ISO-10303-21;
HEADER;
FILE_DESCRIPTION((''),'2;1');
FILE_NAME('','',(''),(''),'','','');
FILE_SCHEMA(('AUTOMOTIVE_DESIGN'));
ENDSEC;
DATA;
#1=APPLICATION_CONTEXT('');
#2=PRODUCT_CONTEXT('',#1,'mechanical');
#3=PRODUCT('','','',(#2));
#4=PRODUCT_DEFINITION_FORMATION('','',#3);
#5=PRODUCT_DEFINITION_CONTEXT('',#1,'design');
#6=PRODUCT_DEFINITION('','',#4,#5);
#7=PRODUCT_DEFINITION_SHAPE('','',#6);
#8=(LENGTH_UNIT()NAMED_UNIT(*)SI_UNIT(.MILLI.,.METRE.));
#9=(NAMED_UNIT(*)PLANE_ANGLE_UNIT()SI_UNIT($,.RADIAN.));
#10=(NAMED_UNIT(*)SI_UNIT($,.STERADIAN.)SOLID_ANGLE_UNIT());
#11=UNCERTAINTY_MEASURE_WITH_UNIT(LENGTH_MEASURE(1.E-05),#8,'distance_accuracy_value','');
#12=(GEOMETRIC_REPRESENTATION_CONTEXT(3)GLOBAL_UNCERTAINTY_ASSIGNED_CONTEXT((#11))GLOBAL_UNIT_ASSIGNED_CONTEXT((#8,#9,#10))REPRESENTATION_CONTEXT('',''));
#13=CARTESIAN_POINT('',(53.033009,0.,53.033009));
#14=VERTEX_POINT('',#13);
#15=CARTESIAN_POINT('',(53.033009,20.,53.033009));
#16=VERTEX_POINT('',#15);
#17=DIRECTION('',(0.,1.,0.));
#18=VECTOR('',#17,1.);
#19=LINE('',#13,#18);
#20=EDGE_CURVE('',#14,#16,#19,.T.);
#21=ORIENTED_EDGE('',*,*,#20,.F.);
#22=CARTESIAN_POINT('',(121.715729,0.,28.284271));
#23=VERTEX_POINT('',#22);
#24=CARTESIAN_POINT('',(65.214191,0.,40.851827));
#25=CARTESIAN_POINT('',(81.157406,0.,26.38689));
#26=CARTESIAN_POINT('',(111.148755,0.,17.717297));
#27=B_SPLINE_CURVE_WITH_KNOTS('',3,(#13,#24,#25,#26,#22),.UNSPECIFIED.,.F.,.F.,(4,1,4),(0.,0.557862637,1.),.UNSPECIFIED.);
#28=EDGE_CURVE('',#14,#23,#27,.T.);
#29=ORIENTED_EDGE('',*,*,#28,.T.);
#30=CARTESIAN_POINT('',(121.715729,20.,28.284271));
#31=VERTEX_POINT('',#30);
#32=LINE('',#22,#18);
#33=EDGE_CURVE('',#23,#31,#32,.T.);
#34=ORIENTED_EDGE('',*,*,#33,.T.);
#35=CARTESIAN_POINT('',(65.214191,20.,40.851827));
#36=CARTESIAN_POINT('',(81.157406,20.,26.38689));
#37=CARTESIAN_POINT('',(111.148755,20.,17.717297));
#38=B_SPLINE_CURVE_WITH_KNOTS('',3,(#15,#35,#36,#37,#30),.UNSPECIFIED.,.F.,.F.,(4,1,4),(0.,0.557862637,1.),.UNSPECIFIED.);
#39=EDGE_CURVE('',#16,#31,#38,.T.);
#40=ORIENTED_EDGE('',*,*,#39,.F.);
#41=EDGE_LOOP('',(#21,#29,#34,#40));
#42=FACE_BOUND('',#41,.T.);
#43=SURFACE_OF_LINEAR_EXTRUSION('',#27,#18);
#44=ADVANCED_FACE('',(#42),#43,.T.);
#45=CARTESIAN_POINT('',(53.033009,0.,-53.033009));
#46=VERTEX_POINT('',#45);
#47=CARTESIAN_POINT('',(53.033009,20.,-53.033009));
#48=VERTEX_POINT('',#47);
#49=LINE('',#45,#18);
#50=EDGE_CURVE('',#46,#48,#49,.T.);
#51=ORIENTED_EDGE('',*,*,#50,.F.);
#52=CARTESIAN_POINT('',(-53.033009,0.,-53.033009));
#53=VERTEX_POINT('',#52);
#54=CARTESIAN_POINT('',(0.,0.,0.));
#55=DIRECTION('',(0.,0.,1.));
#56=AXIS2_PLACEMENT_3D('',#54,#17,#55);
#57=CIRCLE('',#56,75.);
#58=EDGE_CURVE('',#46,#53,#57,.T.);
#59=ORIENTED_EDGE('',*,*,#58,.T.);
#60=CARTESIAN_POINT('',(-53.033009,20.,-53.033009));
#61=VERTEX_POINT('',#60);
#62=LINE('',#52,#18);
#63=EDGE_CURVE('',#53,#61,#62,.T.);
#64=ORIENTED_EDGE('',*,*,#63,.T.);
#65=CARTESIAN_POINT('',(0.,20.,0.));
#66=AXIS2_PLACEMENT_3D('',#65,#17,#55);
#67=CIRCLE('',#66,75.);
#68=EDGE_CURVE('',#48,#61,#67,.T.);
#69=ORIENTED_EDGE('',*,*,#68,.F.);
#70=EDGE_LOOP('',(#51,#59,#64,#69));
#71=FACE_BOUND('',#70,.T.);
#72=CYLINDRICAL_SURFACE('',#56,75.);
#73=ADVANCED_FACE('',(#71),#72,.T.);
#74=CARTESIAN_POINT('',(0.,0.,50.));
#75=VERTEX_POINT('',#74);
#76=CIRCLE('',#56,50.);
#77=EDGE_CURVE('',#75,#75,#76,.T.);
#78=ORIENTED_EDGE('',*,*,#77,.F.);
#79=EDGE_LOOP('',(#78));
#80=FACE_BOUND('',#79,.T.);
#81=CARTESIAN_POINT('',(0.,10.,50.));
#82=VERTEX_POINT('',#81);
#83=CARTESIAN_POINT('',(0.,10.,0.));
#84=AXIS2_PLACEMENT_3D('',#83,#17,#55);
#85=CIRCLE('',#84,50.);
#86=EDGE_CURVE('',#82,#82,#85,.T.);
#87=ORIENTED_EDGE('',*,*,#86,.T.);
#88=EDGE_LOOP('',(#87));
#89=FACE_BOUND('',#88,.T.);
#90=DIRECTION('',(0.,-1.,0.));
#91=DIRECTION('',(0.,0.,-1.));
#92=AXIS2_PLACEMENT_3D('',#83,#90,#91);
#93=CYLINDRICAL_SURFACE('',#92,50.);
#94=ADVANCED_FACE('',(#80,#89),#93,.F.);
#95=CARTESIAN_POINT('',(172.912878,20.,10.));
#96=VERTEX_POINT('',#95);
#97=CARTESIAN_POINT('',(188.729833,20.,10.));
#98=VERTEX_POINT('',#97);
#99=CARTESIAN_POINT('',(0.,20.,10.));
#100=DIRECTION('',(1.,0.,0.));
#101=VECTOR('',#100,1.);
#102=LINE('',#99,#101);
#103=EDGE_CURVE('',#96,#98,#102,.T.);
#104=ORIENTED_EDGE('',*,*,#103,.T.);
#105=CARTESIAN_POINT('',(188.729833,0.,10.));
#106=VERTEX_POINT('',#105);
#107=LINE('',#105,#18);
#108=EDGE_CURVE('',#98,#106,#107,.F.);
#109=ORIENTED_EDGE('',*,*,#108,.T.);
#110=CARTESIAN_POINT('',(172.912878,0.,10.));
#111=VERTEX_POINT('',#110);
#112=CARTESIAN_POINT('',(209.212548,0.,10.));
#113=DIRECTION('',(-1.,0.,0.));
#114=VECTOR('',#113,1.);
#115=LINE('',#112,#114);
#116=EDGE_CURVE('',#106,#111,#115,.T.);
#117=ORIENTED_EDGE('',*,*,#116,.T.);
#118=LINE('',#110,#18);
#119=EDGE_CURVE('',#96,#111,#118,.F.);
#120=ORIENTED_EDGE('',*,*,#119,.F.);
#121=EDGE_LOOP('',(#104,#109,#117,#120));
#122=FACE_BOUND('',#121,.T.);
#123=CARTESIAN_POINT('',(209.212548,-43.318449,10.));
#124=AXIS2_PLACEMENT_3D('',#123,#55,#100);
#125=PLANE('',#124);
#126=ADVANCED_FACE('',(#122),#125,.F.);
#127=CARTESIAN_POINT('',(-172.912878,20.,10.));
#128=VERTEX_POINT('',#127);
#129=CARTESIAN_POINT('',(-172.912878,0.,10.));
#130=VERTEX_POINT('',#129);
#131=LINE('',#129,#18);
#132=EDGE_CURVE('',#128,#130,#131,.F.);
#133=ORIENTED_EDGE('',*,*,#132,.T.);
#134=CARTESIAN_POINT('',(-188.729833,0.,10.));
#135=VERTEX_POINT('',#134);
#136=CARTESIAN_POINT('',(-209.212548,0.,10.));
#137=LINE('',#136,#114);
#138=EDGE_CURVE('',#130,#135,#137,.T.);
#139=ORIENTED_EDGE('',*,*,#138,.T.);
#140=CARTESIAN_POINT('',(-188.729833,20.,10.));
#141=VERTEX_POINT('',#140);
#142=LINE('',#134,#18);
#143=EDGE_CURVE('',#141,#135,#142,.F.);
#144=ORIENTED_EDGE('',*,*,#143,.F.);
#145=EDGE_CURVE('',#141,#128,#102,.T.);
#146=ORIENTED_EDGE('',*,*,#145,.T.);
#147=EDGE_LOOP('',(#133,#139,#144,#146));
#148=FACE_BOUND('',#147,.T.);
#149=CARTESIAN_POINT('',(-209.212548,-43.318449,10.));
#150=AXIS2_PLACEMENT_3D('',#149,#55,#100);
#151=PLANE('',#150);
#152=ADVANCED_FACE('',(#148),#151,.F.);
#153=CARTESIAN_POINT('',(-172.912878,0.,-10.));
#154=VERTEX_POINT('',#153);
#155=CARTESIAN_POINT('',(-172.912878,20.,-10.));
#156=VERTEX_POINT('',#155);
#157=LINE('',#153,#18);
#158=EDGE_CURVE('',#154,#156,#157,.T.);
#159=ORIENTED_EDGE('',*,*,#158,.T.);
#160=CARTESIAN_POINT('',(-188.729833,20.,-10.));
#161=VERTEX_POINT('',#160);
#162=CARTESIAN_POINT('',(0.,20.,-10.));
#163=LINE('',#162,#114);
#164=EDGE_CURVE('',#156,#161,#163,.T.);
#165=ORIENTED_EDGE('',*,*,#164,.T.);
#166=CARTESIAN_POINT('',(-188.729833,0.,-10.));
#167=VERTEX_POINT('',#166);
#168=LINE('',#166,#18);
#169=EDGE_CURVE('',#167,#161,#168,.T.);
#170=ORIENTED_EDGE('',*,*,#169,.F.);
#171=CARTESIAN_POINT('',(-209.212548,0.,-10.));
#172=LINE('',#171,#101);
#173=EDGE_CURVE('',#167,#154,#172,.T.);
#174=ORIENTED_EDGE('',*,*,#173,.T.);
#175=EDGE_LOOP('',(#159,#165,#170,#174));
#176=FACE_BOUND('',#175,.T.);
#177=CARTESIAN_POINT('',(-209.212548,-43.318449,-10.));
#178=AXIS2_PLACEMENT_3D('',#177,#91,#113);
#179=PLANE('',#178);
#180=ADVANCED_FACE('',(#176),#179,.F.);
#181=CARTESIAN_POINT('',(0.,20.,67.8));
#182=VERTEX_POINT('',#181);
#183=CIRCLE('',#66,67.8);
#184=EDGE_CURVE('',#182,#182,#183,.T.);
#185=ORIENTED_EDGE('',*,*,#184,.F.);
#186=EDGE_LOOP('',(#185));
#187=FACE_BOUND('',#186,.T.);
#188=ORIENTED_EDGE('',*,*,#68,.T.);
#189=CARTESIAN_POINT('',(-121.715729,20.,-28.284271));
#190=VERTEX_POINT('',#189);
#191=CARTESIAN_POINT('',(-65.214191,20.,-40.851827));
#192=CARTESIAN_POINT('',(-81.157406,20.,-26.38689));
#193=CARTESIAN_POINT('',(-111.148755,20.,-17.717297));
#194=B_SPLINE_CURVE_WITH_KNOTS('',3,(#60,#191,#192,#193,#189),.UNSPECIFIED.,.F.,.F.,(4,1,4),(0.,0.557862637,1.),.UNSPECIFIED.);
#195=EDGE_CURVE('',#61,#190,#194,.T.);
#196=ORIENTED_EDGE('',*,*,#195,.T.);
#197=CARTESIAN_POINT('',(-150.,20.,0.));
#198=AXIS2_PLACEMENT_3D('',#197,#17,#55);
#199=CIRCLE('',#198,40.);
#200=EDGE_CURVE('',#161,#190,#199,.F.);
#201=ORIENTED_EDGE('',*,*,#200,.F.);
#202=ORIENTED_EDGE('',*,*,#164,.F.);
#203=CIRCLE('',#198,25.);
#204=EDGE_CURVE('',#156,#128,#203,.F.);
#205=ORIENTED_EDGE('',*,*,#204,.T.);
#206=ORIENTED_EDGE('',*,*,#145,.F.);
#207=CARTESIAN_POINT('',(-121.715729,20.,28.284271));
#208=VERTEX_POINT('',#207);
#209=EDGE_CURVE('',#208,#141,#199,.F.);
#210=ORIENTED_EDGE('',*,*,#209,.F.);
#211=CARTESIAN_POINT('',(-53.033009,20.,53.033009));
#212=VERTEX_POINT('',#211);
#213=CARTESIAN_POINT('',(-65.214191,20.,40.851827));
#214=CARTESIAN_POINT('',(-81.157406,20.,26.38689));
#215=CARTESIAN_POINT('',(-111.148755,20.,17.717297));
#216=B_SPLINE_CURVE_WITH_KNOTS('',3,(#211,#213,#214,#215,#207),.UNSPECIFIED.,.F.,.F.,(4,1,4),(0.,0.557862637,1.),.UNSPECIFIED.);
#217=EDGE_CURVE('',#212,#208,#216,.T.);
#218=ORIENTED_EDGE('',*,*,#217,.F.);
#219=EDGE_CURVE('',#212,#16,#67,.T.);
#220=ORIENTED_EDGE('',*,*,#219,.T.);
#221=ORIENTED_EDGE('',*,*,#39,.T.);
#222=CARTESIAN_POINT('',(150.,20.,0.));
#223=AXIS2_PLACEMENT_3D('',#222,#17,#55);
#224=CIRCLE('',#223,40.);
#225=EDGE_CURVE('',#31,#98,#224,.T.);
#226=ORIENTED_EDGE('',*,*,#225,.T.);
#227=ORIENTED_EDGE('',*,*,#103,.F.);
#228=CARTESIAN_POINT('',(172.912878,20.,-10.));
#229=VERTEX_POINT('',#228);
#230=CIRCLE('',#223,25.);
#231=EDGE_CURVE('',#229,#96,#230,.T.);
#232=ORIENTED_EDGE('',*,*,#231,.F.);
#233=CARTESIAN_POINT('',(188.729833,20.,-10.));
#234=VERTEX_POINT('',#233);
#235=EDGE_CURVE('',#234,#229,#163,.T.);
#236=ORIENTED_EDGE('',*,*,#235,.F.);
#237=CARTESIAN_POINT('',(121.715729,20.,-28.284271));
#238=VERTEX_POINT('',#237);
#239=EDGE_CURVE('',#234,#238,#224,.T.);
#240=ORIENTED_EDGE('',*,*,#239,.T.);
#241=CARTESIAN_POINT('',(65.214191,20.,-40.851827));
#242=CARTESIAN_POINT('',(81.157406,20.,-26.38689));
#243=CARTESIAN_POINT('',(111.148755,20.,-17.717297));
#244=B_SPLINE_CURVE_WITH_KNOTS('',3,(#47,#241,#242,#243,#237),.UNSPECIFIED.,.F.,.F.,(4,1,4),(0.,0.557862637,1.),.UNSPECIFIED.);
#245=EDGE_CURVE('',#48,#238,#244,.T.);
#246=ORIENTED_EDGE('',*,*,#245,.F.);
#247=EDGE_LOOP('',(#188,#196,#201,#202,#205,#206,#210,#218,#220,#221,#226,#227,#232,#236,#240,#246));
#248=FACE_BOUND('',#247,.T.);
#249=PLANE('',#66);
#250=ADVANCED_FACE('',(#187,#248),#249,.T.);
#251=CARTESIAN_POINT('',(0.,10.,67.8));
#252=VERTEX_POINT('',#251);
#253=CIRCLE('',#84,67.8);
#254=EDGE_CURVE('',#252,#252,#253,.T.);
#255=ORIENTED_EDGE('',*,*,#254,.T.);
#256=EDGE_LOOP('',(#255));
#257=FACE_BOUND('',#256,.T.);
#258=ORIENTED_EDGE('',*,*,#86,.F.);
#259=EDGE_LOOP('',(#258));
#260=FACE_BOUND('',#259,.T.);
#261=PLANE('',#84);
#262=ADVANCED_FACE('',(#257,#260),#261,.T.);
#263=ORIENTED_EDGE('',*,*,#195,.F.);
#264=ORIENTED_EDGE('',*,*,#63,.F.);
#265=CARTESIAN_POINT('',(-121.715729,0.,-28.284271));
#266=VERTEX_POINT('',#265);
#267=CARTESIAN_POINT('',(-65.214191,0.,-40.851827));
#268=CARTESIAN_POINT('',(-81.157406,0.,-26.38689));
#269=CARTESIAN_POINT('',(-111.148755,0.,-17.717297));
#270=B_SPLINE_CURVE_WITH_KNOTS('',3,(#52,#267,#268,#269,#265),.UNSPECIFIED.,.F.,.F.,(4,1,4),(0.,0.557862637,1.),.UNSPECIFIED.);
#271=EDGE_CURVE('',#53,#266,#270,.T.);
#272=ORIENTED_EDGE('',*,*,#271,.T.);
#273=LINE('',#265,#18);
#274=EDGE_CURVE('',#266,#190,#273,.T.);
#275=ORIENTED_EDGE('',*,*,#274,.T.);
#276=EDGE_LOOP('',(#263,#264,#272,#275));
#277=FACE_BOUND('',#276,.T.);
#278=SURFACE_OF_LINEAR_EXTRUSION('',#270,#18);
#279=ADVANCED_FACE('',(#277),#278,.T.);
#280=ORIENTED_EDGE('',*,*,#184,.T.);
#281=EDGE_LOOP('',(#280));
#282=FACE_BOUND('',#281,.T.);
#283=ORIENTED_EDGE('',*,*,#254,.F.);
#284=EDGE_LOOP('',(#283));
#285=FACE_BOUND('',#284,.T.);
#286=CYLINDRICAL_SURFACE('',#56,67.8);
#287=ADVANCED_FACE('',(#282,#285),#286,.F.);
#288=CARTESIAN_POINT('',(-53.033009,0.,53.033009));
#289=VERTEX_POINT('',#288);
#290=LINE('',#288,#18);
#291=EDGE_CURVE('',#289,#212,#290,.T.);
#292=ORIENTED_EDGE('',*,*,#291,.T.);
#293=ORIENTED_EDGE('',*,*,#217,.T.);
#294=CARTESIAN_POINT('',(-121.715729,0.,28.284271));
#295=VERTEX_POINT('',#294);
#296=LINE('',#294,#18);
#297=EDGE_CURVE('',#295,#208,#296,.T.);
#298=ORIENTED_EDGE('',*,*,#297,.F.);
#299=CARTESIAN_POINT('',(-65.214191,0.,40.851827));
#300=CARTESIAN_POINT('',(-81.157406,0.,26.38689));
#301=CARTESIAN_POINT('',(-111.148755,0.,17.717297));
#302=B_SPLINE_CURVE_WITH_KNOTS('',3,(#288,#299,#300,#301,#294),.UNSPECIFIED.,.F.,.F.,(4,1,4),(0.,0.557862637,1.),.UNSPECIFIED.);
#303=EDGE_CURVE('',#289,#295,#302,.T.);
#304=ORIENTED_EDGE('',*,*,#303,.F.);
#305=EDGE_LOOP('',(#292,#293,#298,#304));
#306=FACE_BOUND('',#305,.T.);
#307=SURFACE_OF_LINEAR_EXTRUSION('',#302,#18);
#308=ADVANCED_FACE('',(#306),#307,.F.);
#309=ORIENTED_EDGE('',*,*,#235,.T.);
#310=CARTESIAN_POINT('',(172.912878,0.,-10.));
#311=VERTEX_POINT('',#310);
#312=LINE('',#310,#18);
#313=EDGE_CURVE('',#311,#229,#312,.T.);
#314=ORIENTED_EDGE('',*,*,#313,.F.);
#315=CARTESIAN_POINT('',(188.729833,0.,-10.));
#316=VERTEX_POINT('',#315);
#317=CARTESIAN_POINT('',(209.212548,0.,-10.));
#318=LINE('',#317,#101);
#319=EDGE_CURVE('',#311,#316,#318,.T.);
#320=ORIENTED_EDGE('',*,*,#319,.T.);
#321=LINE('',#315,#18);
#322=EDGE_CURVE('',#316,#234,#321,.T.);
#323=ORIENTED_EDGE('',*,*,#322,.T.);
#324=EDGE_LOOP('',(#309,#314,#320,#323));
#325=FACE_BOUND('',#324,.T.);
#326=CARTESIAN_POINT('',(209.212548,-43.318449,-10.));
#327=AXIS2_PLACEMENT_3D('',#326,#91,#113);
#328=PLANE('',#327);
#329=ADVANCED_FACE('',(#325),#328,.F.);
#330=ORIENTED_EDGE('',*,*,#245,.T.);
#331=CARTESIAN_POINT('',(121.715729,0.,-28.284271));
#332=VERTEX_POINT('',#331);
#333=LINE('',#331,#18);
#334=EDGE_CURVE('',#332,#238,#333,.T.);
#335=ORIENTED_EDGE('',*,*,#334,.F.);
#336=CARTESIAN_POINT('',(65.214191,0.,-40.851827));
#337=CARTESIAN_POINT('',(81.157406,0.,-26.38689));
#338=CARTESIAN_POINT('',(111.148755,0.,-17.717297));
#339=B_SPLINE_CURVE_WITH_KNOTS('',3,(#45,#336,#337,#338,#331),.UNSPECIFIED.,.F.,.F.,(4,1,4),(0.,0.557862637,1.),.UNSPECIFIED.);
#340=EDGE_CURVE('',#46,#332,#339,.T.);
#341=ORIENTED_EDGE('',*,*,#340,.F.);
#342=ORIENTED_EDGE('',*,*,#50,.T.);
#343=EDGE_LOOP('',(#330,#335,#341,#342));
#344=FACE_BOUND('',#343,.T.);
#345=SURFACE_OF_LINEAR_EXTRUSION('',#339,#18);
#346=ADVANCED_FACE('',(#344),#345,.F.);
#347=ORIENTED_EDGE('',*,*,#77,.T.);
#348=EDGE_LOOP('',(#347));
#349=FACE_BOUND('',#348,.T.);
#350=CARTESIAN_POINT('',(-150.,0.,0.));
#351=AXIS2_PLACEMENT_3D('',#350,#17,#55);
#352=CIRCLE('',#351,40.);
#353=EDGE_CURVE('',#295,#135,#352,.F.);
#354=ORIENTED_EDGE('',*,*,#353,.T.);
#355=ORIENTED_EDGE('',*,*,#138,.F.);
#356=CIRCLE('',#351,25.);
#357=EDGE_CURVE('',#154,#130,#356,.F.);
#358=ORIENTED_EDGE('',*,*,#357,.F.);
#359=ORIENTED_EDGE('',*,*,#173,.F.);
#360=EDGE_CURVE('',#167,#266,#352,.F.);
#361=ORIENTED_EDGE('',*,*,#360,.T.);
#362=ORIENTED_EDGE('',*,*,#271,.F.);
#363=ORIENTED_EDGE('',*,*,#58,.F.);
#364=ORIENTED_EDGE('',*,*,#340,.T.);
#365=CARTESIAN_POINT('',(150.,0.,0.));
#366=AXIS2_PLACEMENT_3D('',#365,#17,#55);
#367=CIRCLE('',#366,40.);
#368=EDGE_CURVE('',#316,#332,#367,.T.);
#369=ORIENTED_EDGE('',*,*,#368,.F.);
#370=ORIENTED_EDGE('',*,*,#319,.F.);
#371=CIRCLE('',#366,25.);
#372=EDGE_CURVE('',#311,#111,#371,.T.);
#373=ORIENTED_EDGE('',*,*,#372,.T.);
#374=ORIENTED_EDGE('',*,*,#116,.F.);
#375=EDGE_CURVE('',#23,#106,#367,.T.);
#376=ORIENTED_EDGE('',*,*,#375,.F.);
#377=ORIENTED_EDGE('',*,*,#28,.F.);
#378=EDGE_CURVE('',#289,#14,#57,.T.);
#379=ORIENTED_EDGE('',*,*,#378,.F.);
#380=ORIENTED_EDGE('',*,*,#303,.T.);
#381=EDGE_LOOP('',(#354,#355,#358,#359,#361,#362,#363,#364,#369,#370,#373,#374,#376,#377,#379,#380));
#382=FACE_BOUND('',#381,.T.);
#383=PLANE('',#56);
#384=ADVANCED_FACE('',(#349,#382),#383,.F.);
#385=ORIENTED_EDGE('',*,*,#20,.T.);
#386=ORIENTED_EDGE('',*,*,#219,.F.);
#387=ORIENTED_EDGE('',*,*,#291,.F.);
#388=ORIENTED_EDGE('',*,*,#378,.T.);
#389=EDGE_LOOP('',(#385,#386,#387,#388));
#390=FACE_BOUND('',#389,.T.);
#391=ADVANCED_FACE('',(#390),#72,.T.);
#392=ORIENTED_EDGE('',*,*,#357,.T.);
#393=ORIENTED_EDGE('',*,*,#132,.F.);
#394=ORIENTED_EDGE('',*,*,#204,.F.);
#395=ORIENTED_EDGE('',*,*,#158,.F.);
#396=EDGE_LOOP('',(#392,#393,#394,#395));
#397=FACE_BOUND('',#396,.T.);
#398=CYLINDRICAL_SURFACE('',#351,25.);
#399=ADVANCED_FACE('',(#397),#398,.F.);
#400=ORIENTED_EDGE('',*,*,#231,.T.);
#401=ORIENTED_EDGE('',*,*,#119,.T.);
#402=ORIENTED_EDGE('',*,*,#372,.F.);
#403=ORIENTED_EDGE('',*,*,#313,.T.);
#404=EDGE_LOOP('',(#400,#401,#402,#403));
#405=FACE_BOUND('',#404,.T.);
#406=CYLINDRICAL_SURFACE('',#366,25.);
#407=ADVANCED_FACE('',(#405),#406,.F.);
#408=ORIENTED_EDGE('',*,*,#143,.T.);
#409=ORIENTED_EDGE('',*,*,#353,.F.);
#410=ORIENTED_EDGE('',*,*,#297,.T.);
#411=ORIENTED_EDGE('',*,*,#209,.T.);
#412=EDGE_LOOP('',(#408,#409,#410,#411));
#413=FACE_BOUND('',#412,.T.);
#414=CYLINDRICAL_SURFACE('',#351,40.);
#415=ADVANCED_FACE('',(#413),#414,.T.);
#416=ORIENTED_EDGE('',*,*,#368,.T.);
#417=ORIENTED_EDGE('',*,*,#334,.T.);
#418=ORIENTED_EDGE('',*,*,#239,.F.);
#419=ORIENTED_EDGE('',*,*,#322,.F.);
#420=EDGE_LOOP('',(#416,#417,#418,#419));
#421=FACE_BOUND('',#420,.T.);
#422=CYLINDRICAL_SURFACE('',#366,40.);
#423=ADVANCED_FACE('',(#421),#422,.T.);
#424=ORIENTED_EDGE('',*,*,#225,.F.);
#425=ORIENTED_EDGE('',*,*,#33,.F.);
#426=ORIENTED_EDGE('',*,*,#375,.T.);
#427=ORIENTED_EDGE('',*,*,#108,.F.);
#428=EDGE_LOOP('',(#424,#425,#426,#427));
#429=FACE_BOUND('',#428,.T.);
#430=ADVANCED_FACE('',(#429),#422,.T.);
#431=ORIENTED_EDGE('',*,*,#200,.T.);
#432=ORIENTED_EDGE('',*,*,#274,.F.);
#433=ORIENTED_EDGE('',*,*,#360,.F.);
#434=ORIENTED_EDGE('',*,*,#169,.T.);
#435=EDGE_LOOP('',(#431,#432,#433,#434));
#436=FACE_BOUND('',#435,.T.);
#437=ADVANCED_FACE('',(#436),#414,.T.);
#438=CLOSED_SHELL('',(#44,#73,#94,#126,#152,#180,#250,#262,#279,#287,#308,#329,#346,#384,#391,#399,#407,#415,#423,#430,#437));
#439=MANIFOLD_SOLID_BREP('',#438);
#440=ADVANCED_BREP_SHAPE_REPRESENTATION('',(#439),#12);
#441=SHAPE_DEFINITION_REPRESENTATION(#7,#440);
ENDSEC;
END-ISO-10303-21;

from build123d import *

# Parameters (mm, degrees)
SKETCH1_R                = 67.8
SKETCH1_R_2              = 50
BOSS_EXTRUDE1_DEPTH      = 10
BOSS_EXTRUDE4_DEPTH      = 10
BOSS_EXTRUDE4_DEPTH_BACK = 10
SKETCH2_R                = 25
SKETCH2_R_2              = 67.8
CUT_EXTRUDE1_START       = -20
CUT_EXTRUDE1_DEPTH       = 20


# Read off the part's stored shape, not the designer's step: Cut-Extrude1
with BuildPart() as part:
    # Sketch1 → Boss-Extrude1 (new body)
    with BuildSketch(Plane(origin=(0, 0, 0), x_dir=(1, 0, 0), z_dir=(0, 1, 0))):
        with Locations(Location((0, 0, 0), (0, 0, 270))):
            Circle(SKETCH1_R)
        with Locations(Location((0, 0, 0), (0, 0, 270))):
            Circle(SKETCH1_R_2, mode=Mode.SUBTRACT)
    extrude(amount=BOSS_EXTRUDE1_DEPTH)

    # Sketch2 → Boss-Extrude4 (add, two sides: drawn at the far end of the back side and taken through both)
    with BuildSketch(Plane(origin=(0, 10, 0), x_dir=(1, 0, 0), z_dir=(0, 1, 0)).offset(-BOSS_EXTRUDE4_DEPTH_BACK)):
        with BuildLine():
            ThreePointArc((150, -40), (190, 0), (150, 40))
            ThreePointArc((150, 40), (134.692662705, 36.9551813), (121.715728753, 28.284271247))
            add(Edge.make_bspline(
                [(53.033008589, 53.033008589), (65.214190565, 40.851826613), (81.157405982, 26.386889755), (111.148754798, 17.717297293), (121.715728753, 28.284271247)],
                knots=[0, 0, 0, 0, 0.557862637, 1, 1, 1, 1], degree=3))
            ThreePointArc((53.033008589, 53.033008589), (0, 75), (-53.033008589, 53.033008589))
            add(Edge.make_bspline(
                [(-53.033008589, 53.033008589), (-65.214190565, 40.851826613), (-81.157405982, 26.386889755), (-111.148754798, 17.717297293), (-121.715728753, 28.284271247)],
                knots=[0, 0, 0, 0, 0.557862637, 1, 1, 1, 1], degree=3))
            ThreePointArc((-121.715728753, 28.284271247), (-134.692662705, 36.9551813), (-150, 40))
            ThreePointArc((-150, 40), (-190, 0), (-150, -40))
            ThreePointArc((-150, -40), (-134.692662705, -36.9551813), (-121.715728753, -28.284271247))
            add(Edge.make_bspline(
                [(-53.033008589, -53.033008589), (-65.214190565, -40.851826613), (-81.157405982, -26.386889755), (-111.148754798, -17.717297293), (-121.715728753, -28.284271247)],
                knots=[0, 0, 0, 0, 0.557862637, 1, 1, 1, 1], degree=3))
            ThreePointArc((-53.033008589, -53.033008589), (0, -75), (53.033008589, -53.033008589))
            add(Edge.make_bspline(
                [(53.033008589, -53.033008589), (65.214190565, -40.851826613), (81.157405982, -26.386889755), (111.148754798, -17.717297293), (121.715728753, -28.284271247)],
                knots=[0, 0, 0, 0, 0.557862637, 1, 1, 1, 1], degree=3))
            ThreePointArc((121.715728753, -28.284271247), (134.692662705, -36.9551813), (150, -40))
        make_face()
        with Locations(Location((-150, 0, 0), (0, 0, 270))):
            Circle(SKETCH2_R, mode=Mode.SUBTRACT)
        with Locations(Location((0, 0, 0), (0, 0, 270))):
            Circle(SKETCH2_R_2, mode=Mode.SUBTRACT)
        with Locations(Location((150, 0, 0), (0, 0, 270))):
            Circle(SKETCH2_R, mode=Mode.SUBTRACT)
    extrude(amount=BOSS_EXTRUDE4_DEPTH + BOSS_EXTRUDE4_DEPTH_BACK)

    # Cut-Extrude1 outline → Cut-Extrude1 (cut)
    with BuildSketch(Plane(origin=(0, 20, 0), x_dir=(1, 0, 0), z_dir=(0, 1, 0)).offset(CUT_EXTRUDE1_START)):
        with BuildLine():
            ThreePointArc((188.729833462, -10), (190, 0), (188.729833462, 10))
            Line((188.729833462, 10), (172.912878475, 10))
            ThreePointArc((172.912878475, 10), (175, 0), (172.912878475, -10))
            Line((172.912878475, -10), (188.729833462, -10))
        make_face()
        with BuildLine():
            ThreePointArc((-172.912878475, -10), (-175, 0), (-172.912878475, 10))
            Line((-172.912878475, 10), (-188.729833462, 10))
            ThreePointArc((-188.729833462, 10), (-190, 0), (-188.729833462, -10))
            Line((-188.729833462, -10), (-172.912878475, -10))
        make_face()
    extrude(amount=CUT_EXTRUDE1_DEPTH, mode=Mode.SUBTRACT)


solid = part.part
